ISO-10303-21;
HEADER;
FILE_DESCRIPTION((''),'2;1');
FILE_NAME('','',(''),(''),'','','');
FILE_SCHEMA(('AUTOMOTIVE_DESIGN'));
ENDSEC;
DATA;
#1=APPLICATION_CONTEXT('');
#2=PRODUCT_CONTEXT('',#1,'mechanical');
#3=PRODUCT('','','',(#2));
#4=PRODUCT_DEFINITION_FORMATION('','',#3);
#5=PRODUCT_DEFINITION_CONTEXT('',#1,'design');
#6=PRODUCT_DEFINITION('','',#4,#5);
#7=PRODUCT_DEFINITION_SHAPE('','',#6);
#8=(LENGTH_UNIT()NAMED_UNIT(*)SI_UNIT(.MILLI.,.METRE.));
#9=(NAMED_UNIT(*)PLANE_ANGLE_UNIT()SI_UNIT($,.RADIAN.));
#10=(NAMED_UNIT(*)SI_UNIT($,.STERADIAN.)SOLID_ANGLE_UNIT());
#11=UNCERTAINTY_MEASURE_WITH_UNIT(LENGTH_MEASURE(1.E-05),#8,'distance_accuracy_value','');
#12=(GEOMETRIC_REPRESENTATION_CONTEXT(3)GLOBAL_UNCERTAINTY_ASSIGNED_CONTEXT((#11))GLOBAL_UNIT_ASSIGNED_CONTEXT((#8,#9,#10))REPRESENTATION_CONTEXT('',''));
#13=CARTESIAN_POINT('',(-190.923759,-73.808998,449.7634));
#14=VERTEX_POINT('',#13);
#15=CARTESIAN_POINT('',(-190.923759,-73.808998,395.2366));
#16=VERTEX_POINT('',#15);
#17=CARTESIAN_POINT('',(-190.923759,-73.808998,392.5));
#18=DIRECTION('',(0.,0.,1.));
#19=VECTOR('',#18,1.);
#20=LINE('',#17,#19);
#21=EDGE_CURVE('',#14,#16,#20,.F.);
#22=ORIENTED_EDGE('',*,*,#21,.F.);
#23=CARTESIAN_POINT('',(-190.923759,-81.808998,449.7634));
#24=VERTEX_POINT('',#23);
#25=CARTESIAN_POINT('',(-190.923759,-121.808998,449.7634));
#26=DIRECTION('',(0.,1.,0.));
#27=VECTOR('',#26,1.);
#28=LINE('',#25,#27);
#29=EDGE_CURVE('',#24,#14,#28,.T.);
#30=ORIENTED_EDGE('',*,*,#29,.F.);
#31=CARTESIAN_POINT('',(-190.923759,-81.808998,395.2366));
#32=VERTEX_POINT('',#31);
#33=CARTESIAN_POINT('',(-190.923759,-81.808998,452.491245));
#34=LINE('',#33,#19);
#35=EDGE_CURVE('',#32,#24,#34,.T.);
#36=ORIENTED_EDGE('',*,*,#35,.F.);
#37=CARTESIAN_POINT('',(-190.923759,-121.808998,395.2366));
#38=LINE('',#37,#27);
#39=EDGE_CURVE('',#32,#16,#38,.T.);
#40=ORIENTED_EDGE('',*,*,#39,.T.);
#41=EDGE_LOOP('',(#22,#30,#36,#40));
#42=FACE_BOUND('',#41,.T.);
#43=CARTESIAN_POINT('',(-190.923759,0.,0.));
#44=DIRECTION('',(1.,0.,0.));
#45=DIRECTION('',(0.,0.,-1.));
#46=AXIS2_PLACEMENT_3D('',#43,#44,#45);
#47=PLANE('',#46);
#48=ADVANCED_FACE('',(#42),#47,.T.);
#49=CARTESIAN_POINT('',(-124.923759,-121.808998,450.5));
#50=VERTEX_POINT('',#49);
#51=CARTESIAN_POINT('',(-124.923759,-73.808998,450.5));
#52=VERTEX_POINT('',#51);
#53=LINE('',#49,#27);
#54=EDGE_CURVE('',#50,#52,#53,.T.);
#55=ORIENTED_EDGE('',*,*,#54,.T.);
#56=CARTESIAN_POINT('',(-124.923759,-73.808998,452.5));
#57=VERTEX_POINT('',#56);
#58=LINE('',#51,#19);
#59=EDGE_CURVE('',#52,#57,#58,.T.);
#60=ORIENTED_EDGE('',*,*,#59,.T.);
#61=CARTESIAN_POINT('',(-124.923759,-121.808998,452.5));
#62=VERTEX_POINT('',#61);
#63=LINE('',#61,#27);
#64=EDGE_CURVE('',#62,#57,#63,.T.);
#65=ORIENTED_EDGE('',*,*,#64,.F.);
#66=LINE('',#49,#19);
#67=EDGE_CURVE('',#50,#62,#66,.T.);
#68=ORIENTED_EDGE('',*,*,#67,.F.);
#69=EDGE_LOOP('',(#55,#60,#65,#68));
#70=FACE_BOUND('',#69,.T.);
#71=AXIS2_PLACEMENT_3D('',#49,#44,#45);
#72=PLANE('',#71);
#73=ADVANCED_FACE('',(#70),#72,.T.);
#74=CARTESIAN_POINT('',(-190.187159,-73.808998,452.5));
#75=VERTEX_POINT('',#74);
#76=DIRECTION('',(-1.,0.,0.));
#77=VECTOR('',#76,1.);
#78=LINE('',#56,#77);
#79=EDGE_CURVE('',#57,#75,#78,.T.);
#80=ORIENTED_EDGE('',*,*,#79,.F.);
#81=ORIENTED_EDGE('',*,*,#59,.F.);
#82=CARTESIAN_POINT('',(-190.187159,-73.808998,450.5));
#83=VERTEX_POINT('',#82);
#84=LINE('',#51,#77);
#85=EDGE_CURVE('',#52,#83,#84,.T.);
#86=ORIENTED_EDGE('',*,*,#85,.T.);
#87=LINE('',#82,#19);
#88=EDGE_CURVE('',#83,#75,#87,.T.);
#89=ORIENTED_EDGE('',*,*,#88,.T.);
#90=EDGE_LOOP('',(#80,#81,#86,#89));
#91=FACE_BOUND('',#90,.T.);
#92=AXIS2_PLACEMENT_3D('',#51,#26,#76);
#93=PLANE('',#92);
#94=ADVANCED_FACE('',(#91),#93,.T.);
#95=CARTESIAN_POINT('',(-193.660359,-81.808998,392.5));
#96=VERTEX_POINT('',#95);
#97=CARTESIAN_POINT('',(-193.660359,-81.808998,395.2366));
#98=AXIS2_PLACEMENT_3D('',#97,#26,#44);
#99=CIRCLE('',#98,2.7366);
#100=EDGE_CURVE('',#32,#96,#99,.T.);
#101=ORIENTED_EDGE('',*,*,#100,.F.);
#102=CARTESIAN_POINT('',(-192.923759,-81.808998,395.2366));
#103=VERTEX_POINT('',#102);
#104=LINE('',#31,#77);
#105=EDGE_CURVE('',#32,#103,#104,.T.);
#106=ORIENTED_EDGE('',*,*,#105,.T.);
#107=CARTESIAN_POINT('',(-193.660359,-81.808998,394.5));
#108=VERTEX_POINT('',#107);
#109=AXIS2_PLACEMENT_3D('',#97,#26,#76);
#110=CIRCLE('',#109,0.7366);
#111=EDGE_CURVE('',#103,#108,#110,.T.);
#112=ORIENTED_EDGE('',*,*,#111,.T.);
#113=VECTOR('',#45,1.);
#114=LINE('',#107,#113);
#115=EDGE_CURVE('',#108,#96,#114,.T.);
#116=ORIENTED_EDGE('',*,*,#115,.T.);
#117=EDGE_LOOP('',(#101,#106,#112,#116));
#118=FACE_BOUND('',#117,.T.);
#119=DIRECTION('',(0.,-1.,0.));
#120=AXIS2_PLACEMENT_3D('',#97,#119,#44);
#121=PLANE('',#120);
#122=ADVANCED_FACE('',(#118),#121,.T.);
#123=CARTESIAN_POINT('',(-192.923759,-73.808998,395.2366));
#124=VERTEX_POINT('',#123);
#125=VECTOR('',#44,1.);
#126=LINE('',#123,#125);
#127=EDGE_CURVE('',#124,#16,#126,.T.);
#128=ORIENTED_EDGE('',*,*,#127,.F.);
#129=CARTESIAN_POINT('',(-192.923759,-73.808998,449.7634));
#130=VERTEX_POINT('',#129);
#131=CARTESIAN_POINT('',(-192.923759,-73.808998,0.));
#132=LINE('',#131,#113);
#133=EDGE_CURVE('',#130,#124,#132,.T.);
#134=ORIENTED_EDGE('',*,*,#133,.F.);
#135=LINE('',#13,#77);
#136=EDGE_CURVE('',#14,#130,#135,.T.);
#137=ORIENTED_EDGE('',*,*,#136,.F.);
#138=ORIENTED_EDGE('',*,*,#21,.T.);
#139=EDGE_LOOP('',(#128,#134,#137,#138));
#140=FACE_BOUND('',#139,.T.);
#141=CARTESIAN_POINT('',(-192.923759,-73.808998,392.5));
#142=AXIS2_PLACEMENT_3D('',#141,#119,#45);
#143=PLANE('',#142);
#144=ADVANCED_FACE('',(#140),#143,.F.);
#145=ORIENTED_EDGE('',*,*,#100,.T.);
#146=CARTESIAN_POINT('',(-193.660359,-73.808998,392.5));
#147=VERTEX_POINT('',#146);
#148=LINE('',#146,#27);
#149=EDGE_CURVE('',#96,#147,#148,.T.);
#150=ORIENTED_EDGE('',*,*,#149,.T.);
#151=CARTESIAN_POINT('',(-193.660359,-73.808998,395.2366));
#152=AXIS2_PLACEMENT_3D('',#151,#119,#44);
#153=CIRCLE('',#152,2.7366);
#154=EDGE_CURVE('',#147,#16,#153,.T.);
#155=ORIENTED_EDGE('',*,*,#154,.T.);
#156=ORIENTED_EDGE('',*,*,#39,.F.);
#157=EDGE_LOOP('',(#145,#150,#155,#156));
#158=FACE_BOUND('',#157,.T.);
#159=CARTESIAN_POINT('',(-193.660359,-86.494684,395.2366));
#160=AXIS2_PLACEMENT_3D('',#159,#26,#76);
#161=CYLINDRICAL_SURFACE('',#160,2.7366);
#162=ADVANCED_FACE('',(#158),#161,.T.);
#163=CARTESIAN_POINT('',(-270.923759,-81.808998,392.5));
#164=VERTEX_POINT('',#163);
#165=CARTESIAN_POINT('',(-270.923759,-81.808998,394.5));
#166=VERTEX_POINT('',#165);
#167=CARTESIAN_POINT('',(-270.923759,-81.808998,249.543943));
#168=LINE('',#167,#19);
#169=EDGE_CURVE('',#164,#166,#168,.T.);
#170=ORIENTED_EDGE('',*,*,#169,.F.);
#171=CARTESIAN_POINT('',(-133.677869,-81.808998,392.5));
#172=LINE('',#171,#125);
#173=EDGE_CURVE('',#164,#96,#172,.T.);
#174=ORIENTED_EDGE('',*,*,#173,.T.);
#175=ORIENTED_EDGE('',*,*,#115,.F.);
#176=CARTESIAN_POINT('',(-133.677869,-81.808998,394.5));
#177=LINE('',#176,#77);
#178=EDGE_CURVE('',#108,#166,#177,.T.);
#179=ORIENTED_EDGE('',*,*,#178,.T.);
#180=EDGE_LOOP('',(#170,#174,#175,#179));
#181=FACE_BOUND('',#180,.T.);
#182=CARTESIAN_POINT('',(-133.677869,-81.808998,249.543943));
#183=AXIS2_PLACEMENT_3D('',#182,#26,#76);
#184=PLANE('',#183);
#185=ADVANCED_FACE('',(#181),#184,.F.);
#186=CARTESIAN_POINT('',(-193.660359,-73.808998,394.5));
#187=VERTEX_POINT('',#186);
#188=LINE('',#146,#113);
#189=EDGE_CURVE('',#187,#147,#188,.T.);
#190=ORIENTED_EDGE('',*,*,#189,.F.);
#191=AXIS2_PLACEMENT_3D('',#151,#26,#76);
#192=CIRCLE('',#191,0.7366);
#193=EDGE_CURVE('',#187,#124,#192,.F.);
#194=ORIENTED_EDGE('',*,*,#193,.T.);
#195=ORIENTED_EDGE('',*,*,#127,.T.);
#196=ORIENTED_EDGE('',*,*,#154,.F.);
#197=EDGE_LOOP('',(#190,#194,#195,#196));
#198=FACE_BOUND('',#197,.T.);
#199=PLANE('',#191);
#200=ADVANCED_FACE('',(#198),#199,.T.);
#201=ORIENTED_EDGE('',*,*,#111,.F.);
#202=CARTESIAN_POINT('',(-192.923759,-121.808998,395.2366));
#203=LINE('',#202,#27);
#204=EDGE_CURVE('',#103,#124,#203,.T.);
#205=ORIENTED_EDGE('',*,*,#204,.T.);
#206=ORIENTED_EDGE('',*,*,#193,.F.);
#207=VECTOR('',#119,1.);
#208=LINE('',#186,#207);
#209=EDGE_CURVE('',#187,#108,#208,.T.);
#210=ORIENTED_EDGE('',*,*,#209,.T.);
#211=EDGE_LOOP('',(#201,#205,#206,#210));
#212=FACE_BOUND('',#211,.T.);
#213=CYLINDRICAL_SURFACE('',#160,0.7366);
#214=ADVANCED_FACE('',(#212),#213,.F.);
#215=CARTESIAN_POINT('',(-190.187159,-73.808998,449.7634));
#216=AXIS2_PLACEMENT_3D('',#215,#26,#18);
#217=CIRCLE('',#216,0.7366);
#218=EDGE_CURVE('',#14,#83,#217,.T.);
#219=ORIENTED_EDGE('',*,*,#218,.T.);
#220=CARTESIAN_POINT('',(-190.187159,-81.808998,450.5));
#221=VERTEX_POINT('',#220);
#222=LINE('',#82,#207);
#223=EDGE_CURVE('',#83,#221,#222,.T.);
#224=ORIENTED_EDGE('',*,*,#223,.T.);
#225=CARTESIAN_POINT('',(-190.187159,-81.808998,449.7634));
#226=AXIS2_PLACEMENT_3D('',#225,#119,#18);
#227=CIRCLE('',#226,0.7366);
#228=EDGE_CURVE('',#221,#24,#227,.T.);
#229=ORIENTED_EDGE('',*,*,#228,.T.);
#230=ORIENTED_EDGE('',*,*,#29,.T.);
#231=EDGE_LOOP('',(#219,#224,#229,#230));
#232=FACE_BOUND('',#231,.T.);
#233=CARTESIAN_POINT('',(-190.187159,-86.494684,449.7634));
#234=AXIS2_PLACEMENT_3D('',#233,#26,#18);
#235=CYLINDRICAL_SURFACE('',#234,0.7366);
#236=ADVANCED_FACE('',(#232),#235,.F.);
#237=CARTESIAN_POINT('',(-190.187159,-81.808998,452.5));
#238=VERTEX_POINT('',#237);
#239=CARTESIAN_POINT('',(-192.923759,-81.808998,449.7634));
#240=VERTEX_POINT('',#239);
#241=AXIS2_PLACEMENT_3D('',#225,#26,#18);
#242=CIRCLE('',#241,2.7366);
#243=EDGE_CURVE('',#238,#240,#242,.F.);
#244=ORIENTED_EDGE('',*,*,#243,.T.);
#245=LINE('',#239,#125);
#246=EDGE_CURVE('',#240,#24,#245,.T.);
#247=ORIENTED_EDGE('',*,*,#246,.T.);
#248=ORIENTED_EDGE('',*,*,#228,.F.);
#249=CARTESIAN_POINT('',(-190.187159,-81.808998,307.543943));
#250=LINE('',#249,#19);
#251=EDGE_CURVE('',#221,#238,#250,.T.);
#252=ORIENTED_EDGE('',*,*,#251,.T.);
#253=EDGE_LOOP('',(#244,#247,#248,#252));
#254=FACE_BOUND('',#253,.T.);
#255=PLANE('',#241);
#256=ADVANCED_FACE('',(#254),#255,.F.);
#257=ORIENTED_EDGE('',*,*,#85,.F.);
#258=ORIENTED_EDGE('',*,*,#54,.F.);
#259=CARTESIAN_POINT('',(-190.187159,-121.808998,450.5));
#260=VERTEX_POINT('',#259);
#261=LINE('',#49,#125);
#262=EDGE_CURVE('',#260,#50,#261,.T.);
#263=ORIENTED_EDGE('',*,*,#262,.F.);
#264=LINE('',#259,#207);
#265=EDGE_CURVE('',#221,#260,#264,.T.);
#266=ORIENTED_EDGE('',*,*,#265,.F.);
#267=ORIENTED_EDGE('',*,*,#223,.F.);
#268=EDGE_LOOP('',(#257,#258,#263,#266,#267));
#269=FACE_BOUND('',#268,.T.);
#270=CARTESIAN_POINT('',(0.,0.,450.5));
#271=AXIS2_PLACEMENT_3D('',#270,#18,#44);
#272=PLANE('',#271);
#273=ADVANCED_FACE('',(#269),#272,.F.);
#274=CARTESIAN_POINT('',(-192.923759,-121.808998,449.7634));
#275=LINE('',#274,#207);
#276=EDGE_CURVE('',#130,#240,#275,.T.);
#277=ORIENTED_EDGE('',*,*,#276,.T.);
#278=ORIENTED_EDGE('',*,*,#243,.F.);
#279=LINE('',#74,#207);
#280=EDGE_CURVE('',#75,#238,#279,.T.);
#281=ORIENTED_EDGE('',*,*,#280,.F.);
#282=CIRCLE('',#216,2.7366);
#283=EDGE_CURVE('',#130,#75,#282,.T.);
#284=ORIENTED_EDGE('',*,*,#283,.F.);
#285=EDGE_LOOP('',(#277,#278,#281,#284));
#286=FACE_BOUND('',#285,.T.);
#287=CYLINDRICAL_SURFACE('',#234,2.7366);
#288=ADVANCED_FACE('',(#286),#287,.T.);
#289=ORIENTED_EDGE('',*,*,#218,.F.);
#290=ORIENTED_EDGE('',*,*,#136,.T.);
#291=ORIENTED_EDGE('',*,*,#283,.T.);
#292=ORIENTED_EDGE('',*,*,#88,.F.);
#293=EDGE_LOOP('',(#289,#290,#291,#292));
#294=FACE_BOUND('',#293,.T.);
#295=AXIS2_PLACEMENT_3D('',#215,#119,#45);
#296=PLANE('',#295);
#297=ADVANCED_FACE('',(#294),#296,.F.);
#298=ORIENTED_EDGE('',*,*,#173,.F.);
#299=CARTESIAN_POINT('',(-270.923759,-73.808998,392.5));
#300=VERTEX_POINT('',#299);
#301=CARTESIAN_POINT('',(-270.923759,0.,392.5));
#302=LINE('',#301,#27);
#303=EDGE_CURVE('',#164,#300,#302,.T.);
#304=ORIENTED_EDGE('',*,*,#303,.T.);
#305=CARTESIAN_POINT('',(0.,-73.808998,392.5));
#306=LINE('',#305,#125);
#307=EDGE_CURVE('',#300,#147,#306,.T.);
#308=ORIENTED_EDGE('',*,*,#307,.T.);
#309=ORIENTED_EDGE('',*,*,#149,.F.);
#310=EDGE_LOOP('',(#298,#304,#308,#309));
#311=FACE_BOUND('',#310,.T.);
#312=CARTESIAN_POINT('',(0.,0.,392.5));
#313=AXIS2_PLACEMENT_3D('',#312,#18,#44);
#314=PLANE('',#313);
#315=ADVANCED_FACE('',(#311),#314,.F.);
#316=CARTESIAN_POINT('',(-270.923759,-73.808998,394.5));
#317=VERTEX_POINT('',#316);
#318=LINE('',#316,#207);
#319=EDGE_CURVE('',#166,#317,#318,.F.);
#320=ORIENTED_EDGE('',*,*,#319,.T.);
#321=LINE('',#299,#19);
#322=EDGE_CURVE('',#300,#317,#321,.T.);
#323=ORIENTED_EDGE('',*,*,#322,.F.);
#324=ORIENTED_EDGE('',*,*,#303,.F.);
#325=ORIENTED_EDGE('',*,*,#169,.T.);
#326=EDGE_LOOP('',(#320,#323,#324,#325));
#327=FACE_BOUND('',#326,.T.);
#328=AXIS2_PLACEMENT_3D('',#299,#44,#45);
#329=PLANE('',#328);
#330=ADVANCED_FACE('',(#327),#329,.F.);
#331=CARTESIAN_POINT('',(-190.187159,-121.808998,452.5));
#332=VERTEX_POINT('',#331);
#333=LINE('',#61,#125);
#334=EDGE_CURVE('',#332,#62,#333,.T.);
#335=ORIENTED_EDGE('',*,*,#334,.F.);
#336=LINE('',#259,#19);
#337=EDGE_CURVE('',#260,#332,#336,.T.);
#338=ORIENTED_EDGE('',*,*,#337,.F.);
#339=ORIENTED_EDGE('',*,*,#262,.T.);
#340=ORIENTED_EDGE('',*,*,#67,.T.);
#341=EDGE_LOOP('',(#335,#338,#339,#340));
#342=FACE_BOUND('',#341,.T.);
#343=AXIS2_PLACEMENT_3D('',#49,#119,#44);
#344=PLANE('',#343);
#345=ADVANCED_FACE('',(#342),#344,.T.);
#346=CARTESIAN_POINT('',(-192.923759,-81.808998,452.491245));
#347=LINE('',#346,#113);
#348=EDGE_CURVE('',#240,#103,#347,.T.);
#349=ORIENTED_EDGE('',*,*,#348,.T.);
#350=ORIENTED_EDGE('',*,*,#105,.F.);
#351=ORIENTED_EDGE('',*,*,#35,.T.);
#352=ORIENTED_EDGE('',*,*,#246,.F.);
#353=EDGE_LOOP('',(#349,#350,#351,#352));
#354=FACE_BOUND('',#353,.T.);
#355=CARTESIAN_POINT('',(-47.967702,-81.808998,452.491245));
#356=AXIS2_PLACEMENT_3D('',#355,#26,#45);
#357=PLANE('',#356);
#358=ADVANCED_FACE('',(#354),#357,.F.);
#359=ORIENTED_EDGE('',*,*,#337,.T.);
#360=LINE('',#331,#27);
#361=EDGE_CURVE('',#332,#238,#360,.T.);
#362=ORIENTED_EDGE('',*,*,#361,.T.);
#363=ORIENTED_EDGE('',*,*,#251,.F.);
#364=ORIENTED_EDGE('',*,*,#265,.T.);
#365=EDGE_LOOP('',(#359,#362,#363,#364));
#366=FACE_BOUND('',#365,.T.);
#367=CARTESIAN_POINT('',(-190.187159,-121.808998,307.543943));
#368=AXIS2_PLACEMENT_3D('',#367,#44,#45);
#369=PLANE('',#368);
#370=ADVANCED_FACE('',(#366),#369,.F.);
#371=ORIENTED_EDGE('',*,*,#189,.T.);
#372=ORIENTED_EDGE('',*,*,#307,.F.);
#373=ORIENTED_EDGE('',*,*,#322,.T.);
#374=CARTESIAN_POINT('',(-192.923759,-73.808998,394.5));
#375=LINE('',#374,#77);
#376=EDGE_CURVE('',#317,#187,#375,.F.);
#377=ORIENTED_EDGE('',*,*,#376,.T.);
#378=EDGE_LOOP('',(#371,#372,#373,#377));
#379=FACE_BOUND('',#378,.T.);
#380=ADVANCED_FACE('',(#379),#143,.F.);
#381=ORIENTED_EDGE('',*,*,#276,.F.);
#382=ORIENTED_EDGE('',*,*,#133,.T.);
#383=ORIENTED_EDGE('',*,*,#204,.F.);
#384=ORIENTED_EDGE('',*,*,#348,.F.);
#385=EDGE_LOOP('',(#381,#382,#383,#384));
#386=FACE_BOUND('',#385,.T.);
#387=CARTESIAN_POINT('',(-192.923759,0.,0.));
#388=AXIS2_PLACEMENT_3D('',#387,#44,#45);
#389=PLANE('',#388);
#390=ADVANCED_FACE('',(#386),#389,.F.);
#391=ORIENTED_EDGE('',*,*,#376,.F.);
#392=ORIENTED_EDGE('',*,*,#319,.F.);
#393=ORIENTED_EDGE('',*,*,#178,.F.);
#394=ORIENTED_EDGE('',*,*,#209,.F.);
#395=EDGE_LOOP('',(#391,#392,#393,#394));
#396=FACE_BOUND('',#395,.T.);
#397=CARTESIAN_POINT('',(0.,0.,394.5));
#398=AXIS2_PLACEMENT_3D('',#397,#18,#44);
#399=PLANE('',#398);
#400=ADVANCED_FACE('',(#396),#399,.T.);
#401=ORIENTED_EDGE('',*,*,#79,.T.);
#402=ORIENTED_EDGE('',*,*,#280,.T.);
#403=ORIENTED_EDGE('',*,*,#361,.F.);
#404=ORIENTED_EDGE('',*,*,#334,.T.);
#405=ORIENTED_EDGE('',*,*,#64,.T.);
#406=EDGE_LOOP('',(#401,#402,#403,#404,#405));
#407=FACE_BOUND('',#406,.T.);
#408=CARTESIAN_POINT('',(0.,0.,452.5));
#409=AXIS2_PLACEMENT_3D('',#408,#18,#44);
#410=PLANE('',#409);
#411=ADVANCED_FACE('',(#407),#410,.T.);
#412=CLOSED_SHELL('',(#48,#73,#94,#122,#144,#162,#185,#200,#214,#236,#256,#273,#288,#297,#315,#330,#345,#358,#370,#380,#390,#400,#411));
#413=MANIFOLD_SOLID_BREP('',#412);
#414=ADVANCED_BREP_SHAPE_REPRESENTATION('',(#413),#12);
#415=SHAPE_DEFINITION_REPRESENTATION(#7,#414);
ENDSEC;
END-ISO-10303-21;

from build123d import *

# Parameters (mm, degrees)
CROQUIS1_W                       = 68
CROQUIS1_H                       = 48
BRIDA_BASE1_DEPTH                = 2
BRIDA_DE_ARISTA1_STRIP_W         = 9.4732
BRIDA_DE_ARISTA1_STRIP_H         = 2
BRIDA_DE_ARISTA1_STRIP_CUT_DEPTH = 48
BRIDA_DE_ARISTA1_DEPTH           = 48
BRIDA_DE_ARISTA2_STRIP_W         = 9.4732
BRIDA_DE_ARISTA2_STRIP_H         = 2
BRIDA_DE_ARISTA2_STRIP_CUT_DEPTH = 48
BRIDA_DE_ARISTA2_DEPTH           = 48
DESDOBLAR1_START                 = -121.8089982
DESDOBLAR1_DEPTH                 = 48
DESDOBLAR1_2_DEPTH               = 48
CROQUIS12_W                      = 137.245889802
CROQUIS12_H                      = 40
CORTAR_EXTRUIR1_DEPTH            = 2
DOBLAR1_START                    = -81.8089982
DOBLAR1_DEPTH                    = 8
DOBLAR1_2_DEPTH                  = 8


# Read off the part's stored shape, not the designer's step: Desdoblar1, Doblar1
# Sheet-metal steps are written as plain solids
with BuildPart() as part:
    # Croquis1 → Brida base1 (new body)
    with BuildSketch(Plane.XY.offset(452.5)):
        with Locations((-158.923759138, -97.8089982)):
            Rectangle(CROQUIS1_W, CROQUIS1_H)
    extrude(amount=-BRIDA_BASE1_DEPTH)

    # Brida de arista1 strip (across the edge) → Brida de arista1 strip cut (cut)
    with BuildSketch(Plane(origin=(-192.923759138, -121.8089982, 450.5), x_dir=(1, 0, 0), z_dir=(0, 1, 0))):
        with Locations((-2, -1)):
            Rectangle(BRIDA_DE_ARISTA1_STRIP_W, BRIDA_DE_ARISTA1_STRIP_H)
    extrude(amount=BRIDA_DE_ARISTA1_STRIP_CUT_DEPTH, mode=Mode.SUBTRACT)

    # Brida de arista1 section (across the edge) → Brida de arista1 (add)
    with BuildSketch(Plane(origin=(-192.923759138, -121.8089982, 450.5), x_dir=(1, 0, 0), z_dir=(0, 1, 0))):
        with BuildLine():
            Line((0, 0.7366), (0, 58))
            Line((0, 58), (2, 58))
            Line((2, 58), (2, 0.7366))
            ThreePointArc((2, 0.7366), (2.215745145, 0.215745145), (2.7366, 0))
            Line((2.7366, 0), (2.7366, -2))
            ThreePointArc((2.7366, -2), (0.801531583, -1.198468417), (0, 0.7366))
        make_face()
    extrude(amount=BRIDA_DE_ARISTA1_DEPTH)

    # Brida de arista2 strip (across the edge) → Brida de arista2 strip cut (cut)
    with BuildSketch(Plane(origin=(-192.923759138, -73.8089982, 392.5), x_dir=(0, 0, 1), z_dir=(0, -1, 0))):
        with Locations((-2, -1)):
            Rectangle(BRIDA_DE_ARISTA2_STRIP_W, BRIDA_DE_ARISTA2_STRIP_H)
    extrude(amount=BRIDA_DE_ARISTA2_STRIP_CUT_DEPTH, mode=Mode.SUBTRACT)

    # Brida de arista2 section (across the edge) → Brida de arista2 (add)
    with BuildSketch(Plane(origin=(-192.923759138, -73.8089982, 392.5), x_dir=(0, 0, 1), z_dir=(0, -1, 0))):
        with BuildLine():
            Line((0, 0.7366), (0, 78))
            Line((0, 78), (2, 78))
            Line((2, 78), (2, 0.7366))
            ThreePointArc((2, 0.7366), (2.215745145, 0.215745145), (2.7366, 0))
            Line((2.7366, 0), (2.7366, -2))
            ThreePointArc((2.7366, -2), (0.801531583, -1.198468417), (0, 0.7366))
        make_face()
    extrude(amount=BRIDA_DE_ARISTA2_DEPTH)

    # Desdoblar1 outline → Desdoblar1 (cut)
    with BuildSketch(Plane(origin=(0, 0, 0), x_dir=(1, 0, 0), z_dir=(0, 1, 0)).offset(DESDOBLAR1_START)):
        with BuildLine():
            ThreePointArc((-192.923759138, -449.7634), (-192.898392168, -450.135145906), (-192.822761536, -450.5))
            Line((-192.822761536, -450.5), (-190.187159138, -450.5))
            ThreePointArc((-190.187159138, -450.5), (-190.708013993, -450.284254855), (-190.923759138, -449.7634))
            Line((-190.923759138, -449.7634), (-190.923759138, -395.2366))
            ThreePointArc((-190.923759138, -395.2366), (-191.725290721, -393.301531583), (-193.660359138, -392.5))
            Line((-193.660359138, -392.5), (-270.923759138, -392.5))
            Line((-270.923759138, -392.5), (-270.923759138, -394.5))
            Line((-270.923759138, -394.5), (-193.660359138, -394.5))
            ThreePointArc((-193.660359138, -394.5), (-193.139504283, -394.715745145), (-192.923759138, -395.2366))
            Line((-192.923759138, -395.2366), (-192.923759138, -449.7634))
        make_face()
    extrude(amount=DESDOBLAR1_DEPTH, mode=Mode.SUBTRACT)

    # Desdoblar1 2 outline → Desdoblar1 2 (add)
    with BuildSketch(Plane(origin=(0, 0, 0), x_dir=(1, 0, 0), z_dir=(0, 1, 0)).offset(DESDOBLAR1_START)):
        with BuildLine():
            Line((-327.43304894, -452.5), (-190.187159138, -452.5))
            ThreePointArc((-190.187159138, -452.5), (-191.841426347, -451.943395312), (-192.822761536, -450.5))
            Line((-192.822761536, -450.5), (-327.43304894, -450.5))
            Line((-327.43304894, -450.5), (-327.43304894, -452.5))
        make_face()
    extrude(amount=DESDOBLAR1_2_DEPTH)

    # Croquis12 → Cortar-Extruir1 (cut)
    with BuildSketch(Plane.XY.offset(452.5)):
        with Locations((-258.810104039, -101.8089982)):
            Rectangle(CROQUIS12_W, CROQUIS12_H)
    extrude(amount=-CORTAR_EXTRUIR1_DEPTH, mode=Mode.SUBTRACT)

    # Doblar1 outline → Doblar1 (cut)
    with BuildSketch(Plane(origin=(0, 0, 0), x_dir=(1, 0, 0), z_dir=(0, 1, 0)).offset(DOBLAR1_START)):
        with BuildLine():
            ThreePointArc((-190.187159138, -452.5), (-191.841426347, -451.943395312), (-192.822761536, -450.5))
            Line((-192.822761536, -450.5), (-327.43304894, -450.5))
            Line((-327.43304894, -450.5), (-327.43304894, -452.5))
            Line((-327.43304894, -452.5), (-190.187159138, -452.5))
        make_face()
    extrude(amount=DOBLAR1_DEPTH, mode=Mode.SUBTRACT)

    # Doblar1 2 outline → Doblar1 2 (add)
    with BuildSketch(Plane(origin=(0, 0, 0), x_dir=(1, 0, 0), z_dir=(0, 1, 0)).offset(DOBLAR1_START)):
        with BuildLine():
            Line((-192.923759138, -395.2366), (-192.923759138, -449.7634))
            ThreePointArc((-192.923759138, -449.7634), (-192.898392168, -450.135145906), (-192.822761536, -450.5))
            Line((-192.822761536, -450.5), (-190.187159138, -450.5))
            ThreePointArc((-190.187159138, -450.5), (-190.708013993, -450.284254855), (-190.923759138, -449.7634))
            Line((-190.923759138, -449.7634), (-190.923759138, -395.2366))
            ThreePointArc((-190.923759138, -395.2366), (-191.725290721, -393.301531583), (-193.660359138, -392.5))
            Line((-193.660359138, -392.5), (-270.923759138, -392.5))
            Line((-270.923759138, -392.5), (-270.923759138, -394.5))
            Line((-270.923759138, -394.5), (-193.660359138, -394.5))
            ThreePointArc((-193.660359138, -394.5), (-193.139504283, -394.715745145), (-192.923759138, -395.2366))
        make_face()
    extrude(amount=DOBLAR1_2_DEPTH)


solid = part.part
